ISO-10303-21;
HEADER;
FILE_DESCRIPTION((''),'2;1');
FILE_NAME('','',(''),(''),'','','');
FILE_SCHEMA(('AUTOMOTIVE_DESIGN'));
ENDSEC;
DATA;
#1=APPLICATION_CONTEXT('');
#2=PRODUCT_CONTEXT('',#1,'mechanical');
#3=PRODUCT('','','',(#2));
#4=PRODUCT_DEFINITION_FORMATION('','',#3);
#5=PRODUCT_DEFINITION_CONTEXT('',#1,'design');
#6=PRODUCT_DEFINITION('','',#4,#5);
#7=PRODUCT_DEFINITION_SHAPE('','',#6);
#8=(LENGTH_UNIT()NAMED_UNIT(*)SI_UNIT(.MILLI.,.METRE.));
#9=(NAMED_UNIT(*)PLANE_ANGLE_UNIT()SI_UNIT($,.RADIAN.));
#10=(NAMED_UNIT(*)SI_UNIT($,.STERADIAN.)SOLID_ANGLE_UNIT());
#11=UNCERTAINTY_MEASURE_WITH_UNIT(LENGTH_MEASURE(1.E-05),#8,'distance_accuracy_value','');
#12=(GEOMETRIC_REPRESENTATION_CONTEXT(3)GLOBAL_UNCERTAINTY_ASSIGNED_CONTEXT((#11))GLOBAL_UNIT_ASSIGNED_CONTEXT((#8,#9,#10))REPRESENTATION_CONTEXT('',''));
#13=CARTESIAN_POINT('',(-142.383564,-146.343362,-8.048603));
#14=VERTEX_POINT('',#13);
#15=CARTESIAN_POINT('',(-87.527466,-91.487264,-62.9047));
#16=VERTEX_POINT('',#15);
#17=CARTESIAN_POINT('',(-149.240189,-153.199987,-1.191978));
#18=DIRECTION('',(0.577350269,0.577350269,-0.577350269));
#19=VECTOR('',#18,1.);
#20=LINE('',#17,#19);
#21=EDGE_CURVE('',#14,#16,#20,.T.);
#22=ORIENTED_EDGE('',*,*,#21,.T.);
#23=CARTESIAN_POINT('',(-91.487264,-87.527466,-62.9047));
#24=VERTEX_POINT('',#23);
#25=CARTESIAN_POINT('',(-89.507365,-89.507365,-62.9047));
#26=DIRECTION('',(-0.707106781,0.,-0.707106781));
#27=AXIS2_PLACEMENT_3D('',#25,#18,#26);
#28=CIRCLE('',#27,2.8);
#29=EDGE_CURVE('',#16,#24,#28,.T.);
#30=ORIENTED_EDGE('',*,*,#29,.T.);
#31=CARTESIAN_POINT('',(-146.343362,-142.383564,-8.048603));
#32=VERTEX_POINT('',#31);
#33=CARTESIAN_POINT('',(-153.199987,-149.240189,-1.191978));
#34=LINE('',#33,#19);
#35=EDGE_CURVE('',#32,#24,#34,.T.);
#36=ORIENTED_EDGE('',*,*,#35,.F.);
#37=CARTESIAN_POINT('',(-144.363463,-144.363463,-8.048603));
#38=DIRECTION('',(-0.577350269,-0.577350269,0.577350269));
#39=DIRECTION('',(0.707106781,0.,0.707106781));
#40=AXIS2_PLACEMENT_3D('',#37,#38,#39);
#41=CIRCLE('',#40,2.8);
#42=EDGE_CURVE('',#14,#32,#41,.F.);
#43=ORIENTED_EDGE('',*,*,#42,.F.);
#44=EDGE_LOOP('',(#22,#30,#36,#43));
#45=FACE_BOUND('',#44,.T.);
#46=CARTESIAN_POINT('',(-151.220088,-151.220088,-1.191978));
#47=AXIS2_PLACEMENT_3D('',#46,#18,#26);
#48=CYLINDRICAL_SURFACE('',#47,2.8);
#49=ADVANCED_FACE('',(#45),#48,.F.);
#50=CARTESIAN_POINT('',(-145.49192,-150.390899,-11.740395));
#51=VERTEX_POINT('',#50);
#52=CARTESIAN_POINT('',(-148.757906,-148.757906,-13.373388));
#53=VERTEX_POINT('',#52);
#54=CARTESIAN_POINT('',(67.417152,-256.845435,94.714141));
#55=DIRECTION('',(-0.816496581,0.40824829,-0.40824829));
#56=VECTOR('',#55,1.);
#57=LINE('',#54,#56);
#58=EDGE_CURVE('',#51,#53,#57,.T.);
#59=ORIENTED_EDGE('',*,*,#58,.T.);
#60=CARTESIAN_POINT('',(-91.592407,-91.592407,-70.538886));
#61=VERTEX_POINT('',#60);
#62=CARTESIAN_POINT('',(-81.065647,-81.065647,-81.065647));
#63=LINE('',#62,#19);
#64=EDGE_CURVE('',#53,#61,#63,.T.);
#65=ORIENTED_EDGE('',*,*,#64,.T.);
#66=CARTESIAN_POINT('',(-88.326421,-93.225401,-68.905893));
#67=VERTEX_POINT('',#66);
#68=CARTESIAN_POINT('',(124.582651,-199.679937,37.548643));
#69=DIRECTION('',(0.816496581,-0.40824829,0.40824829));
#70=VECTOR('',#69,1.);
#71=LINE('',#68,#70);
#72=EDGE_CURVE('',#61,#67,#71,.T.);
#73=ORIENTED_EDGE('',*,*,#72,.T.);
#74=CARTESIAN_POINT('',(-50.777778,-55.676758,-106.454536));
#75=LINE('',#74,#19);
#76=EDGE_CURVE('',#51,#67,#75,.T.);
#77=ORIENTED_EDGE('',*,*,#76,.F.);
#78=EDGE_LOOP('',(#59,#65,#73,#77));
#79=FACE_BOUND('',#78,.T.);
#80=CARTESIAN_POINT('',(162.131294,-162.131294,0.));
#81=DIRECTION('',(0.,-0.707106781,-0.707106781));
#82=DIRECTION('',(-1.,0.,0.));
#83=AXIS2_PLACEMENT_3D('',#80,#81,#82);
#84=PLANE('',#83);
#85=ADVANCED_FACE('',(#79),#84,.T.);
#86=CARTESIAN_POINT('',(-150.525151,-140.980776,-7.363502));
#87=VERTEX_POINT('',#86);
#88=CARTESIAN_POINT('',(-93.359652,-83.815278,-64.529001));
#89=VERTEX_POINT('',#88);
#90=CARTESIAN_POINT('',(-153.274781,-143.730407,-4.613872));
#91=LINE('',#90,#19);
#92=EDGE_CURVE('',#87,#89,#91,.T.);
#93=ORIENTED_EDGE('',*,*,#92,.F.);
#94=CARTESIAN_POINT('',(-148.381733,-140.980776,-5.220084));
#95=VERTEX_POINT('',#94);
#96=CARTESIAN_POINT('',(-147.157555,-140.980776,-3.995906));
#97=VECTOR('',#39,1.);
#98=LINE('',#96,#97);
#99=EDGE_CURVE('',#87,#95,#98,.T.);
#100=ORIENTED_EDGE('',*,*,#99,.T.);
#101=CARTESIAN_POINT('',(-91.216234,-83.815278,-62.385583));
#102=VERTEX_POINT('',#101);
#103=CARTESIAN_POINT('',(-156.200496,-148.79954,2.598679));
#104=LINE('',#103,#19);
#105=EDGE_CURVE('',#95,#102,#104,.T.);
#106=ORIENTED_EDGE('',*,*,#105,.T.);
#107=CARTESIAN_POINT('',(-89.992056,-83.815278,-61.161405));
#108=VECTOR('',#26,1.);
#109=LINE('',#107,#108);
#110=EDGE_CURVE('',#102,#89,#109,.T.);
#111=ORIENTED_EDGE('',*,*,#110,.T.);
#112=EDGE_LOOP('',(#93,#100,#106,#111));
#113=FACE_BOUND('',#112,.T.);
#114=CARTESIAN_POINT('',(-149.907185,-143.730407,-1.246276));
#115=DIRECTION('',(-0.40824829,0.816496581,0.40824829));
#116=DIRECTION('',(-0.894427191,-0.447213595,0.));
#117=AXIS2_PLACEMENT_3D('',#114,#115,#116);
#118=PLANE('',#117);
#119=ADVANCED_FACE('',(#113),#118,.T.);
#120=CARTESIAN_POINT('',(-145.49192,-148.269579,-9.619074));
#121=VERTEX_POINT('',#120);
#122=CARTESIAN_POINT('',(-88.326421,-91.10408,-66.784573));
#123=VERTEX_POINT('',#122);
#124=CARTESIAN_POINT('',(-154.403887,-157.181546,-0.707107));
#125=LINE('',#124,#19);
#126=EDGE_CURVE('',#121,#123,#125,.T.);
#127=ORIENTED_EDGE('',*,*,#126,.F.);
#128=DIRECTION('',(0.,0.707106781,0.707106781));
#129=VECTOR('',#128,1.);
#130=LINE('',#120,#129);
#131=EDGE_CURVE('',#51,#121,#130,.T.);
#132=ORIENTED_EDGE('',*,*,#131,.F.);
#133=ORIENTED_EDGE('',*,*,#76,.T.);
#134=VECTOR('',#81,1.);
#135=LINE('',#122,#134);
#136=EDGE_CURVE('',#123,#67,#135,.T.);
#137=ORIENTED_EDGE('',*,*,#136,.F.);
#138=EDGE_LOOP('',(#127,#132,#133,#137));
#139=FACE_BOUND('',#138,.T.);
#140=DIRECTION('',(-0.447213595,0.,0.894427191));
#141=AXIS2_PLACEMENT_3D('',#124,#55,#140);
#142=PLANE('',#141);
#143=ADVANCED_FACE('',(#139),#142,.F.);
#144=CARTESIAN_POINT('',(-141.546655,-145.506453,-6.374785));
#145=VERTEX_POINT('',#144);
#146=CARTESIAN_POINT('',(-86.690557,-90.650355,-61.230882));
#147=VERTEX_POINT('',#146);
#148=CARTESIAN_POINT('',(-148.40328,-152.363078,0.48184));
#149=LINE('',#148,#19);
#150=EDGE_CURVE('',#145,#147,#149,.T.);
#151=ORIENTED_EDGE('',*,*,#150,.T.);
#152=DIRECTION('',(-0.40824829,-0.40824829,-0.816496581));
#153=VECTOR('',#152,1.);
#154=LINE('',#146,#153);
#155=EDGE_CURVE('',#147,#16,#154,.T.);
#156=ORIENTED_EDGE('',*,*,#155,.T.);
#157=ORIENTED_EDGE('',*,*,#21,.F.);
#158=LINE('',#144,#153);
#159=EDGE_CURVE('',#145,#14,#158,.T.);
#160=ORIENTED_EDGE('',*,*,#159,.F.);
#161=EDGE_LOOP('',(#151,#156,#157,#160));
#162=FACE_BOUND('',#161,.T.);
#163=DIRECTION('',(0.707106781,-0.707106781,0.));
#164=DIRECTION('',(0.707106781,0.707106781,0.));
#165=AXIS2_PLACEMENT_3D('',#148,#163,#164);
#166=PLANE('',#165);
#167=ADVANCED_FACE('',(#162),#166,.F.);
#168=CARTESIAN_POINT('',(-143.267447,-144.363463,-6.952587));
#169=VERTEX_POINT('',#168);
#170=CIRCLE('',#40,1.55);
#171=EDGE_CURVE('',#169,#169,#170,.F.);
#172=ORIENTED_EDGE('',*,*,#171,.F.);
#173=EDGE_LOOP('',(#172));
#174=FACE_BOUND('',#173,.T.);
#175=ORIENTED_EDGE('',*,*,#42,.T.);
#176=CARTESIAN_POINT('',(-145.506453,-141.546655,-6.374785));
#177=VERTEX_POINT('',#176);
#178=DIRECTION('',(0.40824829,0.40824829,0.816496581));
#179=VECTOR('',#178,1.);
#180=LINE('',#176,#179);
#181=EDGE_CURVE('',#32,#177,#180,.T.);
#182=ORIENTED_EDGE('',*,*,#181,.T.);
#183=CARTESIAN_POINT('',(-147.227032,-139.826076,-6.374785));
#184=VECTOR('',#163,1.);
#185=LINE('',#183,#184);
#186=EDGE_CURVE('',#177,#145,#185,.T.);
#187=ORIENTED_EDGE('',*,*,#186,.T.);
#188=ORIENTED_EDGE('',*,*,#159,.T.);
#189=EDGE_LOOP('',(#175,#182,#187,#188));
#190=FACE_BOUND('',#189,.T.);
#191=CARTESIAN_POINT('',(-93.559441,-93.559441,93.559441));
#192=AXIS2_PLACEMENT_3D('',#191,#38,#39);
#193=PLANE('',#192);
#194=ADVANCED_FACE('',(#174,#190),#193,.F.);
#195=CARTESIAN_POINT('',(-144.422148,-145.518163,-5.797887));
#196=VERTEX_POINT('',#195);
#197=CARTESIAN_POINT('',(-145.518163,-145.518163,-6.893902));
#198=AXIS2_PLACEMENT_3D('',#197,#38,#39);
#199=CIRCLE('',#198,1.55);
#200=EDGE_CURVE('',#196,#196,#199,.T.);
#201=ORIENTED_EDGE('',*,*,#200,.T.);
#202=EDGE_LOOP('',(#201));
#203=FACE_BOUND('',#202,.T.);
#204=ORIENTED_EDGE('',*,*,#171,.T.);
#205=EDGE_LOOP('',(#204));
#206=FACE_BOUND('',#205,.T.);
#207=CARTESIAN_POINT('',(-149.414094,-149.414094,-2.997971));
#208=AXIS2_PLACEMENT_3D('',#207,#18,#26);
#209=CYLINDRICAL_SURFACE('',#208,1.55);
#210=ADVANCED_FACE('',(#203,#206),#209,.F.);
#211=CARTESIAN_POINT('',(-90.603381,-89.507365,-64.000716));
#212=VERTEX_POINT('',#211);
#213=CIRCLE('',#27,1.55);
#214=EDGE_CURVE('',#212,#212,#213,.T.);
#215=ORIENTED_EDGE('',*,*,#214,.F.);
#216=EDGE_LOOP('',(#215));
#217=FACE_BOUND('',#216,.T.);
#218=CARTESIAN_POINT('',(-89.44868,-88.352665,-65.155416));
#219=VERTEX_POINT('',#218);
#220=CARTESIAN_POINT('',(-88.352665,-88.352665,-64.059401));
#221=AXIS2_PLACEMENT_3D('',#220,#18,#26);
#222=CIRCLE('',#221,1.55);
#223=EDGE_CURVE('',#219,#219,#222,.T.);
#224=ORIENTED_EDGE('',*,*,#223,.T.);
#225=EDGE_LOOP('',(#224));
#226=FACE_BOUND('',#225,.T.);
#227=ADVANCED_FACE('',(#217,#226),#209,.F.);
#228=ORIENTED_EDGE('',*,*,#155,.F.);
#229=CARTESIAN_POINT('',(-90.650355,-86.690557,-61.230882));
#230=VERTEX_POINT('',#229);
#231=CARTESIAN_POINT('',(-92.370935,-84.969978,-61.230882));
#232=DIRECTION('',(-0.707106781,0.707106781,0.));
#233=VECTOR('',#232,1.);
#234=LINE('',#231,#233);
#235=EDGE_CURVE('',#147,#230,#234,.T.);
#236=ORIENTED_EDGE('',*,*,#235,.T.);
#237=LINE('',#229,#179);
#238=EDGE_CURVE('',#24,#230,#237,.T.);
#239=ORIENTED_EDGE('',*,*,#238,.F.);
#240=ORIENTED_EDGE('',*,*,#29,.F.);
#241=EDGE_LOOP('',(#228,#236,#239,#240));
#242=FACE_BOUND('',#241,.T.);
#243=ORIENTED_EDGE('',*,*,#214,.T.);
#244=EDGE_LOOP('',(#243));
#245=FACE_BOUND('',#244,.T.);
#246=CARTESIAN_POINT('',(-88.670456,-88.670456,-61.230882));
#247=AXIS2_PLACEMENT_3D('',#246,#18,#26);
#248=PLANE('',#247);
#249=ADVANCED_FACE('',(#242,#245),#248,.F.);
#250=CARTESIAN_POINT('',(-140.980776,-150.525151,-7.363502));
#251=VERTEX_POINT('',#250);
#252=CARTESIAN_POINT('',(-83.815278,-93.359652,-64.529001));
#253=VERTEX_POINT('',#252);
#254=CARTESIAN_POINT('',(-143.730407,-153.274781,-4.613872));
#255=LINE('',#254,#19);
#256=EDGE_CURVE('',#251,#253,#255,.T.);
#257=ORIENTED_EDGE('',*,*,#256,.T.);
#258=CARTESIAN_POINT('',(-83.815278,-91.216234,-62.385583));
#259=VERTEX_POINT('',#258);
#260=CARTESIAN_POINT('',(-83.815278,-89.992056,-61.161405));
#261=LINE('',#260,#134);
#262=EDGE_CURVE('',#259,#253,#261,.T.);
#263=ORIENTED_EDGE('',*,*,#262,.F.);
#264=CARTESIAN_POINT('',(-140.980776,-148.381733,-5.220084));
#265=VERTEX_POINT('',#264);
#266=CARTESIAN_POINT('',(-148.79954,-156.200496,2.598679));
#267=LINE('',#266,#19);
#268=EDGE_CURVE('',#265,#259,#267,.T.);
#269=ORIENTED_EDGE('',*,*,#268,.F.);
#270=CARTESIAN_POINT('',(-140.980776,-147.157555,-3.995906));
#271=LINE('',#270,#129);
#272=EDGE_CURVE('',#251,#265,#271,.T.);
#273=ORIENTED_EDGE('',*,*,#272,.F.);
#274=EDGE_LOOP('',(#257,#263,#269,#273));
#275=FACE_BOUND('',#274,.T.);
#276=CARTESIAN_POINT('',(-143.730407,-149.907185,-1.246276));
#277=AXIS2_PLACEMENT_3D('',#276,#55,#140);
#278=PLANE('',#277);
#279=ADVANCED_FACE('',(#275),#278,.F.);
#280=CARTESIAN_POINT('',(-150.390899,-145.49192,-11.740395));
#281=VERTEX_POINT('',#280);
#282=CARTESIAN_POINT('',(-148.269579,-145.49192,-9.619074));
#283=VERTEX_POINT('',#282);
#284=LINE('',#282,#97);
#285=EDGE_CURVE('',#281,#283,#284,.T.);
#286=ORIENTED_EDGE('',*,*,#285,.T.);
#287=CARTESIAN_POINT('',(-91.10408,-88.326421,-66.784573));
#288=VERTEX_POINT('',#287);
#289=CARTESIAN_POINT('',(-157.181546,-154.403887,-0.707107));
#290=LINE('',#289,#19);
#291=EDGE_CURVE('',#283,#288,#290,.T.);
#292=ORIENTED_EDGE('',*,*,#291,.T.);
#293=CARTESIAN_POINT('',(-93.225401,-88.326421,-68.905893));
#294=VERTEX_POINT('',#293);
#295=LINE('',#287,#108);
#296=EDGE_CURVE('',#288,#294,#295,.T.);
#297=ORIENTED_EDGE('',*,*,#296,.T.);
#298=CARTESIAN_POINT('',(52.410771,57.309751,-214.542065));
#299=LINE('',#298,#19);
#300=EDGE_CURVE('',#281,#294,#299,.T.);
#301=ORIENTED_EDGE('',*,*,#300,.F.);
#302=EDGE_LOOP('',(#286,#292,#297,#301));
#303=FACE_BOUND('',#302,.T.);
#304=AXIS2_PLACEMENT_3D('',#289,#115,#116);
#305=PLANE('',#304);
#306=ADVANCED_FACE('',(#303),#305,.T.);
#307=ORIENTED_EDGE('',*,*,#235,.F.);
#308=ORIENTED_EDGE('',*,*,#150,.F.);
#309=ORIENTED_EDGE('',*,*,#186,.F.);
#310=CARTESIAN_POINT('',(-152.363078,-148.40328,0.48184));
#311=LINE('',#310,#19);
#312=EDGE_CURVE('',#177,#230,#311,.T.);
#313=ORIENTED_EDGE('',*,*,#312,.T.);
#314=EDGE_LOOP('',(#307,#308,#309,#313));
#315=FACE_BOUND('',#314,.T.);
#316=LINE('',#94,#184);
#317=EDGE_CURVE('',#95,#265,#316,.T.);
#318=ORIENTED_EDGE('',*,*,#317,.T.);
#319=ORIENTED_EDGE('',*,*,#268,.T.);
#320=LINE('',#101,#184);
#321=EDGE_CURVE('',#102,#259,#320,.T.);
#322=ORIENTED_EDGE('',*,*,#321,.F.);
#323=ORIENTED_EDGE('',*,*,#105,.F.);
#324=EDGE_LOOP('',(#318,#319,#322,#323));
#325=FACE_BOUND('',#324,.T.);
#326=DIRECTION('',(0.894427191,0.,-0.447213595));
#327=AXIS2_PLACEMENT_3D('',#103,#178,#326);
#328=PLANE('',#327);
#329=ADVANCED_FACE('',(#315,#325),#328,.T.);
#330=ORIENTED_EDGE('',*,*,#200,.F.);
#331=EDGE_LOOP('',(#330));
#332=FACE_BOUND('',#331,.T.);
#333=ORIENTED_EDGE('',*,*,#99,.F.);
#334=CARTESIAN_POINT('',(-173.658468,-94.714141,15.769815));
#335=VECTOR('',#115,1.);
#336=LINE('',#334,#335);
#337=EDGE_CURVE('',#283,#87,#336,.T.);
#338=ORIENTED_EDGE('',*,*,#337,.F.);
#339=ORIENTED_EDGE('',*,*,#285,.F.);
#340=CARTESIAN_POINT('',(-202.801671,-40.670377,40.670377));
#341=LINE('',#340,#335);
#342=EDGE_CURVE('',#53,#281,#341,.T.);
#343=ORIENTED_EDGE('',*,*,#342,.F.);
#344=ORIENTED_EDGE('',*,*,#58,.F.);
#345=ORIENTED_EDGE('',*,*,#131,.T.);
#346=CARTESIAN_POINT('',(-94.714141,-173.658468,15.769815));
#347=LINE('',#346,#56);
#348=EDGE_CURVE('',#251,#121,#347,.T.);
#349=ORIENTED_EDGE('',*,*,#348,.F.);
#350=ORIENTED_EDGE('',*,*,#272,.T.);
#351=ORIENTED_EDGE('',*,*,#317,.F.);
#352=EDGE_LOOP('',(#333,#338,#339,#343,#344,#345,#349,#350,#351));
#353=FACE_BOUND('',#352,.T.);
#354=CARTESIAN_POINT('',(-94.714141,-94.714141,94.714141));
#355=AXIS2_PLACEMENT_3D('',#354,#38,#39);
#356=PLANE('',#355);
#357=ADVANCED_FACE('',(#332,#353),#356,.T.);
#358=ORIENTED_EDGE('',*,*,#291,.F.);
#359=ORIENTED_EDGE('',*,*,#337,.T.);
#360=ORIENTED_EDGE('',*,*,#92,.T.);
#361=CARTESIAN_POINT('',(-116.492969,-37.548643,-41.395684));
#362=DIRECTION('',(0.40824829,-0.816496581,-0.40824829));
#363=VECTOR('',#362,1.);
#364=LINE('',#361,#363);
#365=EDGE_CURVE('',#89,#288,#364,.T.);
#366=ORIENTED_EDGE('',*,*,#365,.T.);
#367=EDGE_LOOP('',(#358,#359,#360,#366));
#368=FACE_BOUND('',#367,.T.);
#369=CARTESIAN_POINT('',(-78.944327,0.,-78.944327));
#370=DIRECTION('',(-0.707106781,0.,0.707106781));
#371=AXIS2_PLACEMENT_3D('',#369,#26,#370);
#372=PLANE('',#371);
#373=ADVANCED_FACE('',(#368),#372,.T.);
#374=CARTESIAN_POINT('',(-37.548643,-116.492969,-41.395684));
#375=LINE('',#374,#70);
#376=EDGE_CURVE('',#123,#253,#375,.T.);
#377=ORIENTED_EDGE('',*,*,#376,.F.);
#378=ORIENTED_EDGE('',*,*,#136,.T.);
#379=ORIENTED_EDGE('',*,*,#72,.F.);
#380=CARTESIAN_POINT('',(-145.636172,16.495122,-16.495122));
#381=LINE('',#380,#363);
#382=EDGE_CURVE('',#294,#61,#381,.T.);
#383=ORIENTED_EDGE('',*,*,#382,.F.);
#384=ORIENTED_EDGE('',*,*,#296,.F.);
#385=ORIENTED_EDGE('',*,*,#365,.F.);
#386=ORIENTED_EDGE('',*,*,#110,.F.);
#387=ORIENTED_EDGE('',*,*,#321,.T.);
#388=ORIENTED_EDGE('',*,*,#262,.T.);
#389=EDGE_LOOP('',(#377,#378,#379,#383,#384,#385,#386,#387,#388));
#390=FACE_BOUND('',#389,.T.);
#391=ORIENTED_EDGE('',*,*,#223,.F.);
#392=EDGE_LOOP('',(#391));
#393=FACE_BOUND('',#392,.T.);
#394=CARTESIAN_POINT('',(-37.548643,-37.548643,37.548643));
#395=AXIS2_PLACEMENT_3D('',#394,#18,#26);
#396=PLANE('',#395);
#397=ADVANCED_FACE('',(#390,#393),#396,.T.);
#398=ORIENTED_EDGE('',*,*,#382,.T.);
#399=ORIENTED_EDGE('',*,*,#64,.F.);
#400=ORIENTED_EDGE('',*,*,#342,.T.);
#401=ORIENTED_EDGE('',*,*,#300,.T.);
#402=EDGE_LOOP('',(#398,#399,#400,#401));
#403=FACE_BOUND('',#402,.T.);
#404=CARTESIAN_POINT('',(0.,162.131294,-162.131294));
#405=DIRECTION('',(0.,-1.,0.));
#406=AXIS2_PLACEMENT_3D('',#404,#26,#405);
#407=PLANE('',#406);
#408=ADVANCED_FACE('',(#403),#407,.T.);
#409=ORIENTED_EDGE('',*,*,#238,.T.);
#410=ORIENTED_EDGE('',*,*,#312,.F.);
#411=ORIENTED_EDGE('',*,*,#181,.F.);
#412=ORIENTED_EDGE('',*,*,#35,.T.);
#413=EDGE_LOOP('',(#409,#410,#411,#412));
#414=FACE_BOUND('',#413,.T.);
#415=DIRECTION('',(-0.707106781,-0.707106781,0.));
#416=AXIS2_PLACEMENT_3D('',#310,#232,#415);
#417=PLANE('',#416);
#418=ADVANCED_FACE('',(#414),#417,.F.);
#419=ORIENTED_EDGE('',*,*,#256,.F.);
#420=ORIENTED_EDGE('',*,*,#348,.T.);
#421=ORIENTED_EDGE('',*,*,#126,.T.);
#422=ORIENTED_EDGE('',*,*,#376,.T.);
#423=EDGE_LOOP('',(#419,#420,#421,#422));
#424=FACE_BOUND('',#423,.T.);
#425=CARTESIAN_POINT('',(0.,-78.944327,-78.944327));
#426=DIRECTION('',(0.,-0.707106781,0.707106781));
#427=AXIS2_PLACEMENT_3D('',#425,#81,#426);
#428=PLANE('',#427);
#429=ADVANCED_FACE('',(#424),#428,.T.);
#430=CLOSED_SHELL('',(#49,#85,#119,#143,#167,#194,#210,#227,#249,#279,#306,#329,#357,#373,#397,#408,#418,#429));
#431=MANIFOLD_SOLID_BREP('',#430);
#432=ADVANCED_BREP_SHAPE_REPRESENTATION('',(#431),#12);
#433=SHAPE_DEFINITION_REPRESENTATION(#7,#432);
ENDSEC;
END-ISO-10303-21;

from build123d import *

# Parameters (mm, degrees)
STOCK_PFRD_START               = -164.049705188
STOCK_PFRD_JOINER_BASE_1_DEPTH = 99.013547962
BOSS_EXTRUDE1_DEPTH            = 99.013547962
CUT_EXTRUDE1_DEPTH             = 193.899706011
CUT_EXTRUDE1_DEPTH_BACK        = 193.899706011
SKETCH2_R                      = 1.55
CUT_EXTRUDE2_START             = -2
SKETCH2_3_R                    = 1.55
CUT_EXTRUDE2_DEPTH             = 95.013547962


# Read off the part's stored shape, not the designer's step: Stock-PFRD - Joiner Base-1
with BuildPart() as part:
    # Stock-PFRD - Joiner Base-1 outline → Stock-PFRD - Joiner Base-1 (new body)
    with BuildSketch(Plane(origin=(0, 0, 0), x_dir=(0.8164965809277251, -0.4082482904638628, 0.4082482904638649), z_dir=(0.5773502691896268, 0.5773502691896238, -0.5773502691896268)).offset(STOCK_PFRD_START)):
        Polygon((-62.189823503, 111.644137252), (-62.189823503, 114.644137252), (-66.189823503, 114.644137252), (-68.189823503, 111.180035637), (-65.591747292, 109.680035637), (-68.354247292, 104.895245281), (-67.382105967, 104.333979225), (-63.809678479, 110.521605141), (-56.664823503, 110.521605141), (-56.664823503, 111.644137252), align=None)
    extrude(amount=STOCK_PFRD_JOINER_BASE_1_DEPTH)

    # Sketch1 → Boss-Extrude1 (add)
    with BuildSketch(Plane(origin=(-37.548642882, -37.548642882, 37.548642882), x_dir=(-0.4082482904638644, -0.40824829046386246, -0.8164965809277256), z_dir=(0.5773502691896268, 0.5773502691896242, -0.5773502691896264))):
        Polygon((124.046929471, 6.187625915), (122.393930478, 5.233266502), (122.393930478, -5.233266502), (124.046929471, -6.187625915), (126.031643718, -2.75), (127.619356958, 0), (126.031643718, 2.75), align=None)
    extrude(amount=-BOSS_EXTRUDE1_DEPTH)

    # Sketch2 → Cut-Extrude1 (cut, two sides: drawn at the far end of the back side and taken through both)
    with BuildSketch(Plane(origin=(-37.548642882, -37.548642882, 37.548642882), x_dir=(-0.4082482904638644, -0.40824829046386246, -0.8164965809277256), z_dir=(0.5773502691896268, 0.5773502691896242, -0.5773502691896264)).offset(-CUT_EXTRUDE1_DEPTH_BACK)):
        with Locations(Location((124.443930478, 0, 0), (0, 0, 30))):
            Circle(SKETCH2_R)
    extrude(amount=CUT_EXTRUDE1_DEPTH + CUT_EXTRUDE1_DEPTH_BACK, mode=Mode.SUBTRACT)

    # Sketch2<3> → Cut-Extrude2 (cut)
    with BuildSketch(Plane(origin=(-37.548642882, -37.548642882, 37.548642882), x_dir=(-0.4082482904638644, -0.40824829046386246, -0.8164965809277256), z_dir=(0.5773502691896268, 0.5773502691896242, -0.5773502691896264)).offset(CUT_EXTRUDE2_START)):
        with BuildLine():
            Line((122.393930478, 2.799999988), (124.443930478, 2.799999988))
            ThreePointArc((124.443930478, 2.799999988), (127.243930466, 0), (124.443930478, -2.799999988))
            Line((124.443930478, -2.799999988), (122.393930478, -2.799999988))
            ThreePointArc((122.393930478, -2.799999988), (119.59393049, 0), (122.393930478, 2.799999988))
        make_face()
        with Locations(Location((124.443930478, 0, 0), (0, 0, 30))):
            Circle(SKETCH2_3_R, mode=Mode.SUBTRACT)
    extrude(amount=-CUT_EXTRUDE2_DEPTH, mode=Mode.SUBTRACT)


solid = part.part
